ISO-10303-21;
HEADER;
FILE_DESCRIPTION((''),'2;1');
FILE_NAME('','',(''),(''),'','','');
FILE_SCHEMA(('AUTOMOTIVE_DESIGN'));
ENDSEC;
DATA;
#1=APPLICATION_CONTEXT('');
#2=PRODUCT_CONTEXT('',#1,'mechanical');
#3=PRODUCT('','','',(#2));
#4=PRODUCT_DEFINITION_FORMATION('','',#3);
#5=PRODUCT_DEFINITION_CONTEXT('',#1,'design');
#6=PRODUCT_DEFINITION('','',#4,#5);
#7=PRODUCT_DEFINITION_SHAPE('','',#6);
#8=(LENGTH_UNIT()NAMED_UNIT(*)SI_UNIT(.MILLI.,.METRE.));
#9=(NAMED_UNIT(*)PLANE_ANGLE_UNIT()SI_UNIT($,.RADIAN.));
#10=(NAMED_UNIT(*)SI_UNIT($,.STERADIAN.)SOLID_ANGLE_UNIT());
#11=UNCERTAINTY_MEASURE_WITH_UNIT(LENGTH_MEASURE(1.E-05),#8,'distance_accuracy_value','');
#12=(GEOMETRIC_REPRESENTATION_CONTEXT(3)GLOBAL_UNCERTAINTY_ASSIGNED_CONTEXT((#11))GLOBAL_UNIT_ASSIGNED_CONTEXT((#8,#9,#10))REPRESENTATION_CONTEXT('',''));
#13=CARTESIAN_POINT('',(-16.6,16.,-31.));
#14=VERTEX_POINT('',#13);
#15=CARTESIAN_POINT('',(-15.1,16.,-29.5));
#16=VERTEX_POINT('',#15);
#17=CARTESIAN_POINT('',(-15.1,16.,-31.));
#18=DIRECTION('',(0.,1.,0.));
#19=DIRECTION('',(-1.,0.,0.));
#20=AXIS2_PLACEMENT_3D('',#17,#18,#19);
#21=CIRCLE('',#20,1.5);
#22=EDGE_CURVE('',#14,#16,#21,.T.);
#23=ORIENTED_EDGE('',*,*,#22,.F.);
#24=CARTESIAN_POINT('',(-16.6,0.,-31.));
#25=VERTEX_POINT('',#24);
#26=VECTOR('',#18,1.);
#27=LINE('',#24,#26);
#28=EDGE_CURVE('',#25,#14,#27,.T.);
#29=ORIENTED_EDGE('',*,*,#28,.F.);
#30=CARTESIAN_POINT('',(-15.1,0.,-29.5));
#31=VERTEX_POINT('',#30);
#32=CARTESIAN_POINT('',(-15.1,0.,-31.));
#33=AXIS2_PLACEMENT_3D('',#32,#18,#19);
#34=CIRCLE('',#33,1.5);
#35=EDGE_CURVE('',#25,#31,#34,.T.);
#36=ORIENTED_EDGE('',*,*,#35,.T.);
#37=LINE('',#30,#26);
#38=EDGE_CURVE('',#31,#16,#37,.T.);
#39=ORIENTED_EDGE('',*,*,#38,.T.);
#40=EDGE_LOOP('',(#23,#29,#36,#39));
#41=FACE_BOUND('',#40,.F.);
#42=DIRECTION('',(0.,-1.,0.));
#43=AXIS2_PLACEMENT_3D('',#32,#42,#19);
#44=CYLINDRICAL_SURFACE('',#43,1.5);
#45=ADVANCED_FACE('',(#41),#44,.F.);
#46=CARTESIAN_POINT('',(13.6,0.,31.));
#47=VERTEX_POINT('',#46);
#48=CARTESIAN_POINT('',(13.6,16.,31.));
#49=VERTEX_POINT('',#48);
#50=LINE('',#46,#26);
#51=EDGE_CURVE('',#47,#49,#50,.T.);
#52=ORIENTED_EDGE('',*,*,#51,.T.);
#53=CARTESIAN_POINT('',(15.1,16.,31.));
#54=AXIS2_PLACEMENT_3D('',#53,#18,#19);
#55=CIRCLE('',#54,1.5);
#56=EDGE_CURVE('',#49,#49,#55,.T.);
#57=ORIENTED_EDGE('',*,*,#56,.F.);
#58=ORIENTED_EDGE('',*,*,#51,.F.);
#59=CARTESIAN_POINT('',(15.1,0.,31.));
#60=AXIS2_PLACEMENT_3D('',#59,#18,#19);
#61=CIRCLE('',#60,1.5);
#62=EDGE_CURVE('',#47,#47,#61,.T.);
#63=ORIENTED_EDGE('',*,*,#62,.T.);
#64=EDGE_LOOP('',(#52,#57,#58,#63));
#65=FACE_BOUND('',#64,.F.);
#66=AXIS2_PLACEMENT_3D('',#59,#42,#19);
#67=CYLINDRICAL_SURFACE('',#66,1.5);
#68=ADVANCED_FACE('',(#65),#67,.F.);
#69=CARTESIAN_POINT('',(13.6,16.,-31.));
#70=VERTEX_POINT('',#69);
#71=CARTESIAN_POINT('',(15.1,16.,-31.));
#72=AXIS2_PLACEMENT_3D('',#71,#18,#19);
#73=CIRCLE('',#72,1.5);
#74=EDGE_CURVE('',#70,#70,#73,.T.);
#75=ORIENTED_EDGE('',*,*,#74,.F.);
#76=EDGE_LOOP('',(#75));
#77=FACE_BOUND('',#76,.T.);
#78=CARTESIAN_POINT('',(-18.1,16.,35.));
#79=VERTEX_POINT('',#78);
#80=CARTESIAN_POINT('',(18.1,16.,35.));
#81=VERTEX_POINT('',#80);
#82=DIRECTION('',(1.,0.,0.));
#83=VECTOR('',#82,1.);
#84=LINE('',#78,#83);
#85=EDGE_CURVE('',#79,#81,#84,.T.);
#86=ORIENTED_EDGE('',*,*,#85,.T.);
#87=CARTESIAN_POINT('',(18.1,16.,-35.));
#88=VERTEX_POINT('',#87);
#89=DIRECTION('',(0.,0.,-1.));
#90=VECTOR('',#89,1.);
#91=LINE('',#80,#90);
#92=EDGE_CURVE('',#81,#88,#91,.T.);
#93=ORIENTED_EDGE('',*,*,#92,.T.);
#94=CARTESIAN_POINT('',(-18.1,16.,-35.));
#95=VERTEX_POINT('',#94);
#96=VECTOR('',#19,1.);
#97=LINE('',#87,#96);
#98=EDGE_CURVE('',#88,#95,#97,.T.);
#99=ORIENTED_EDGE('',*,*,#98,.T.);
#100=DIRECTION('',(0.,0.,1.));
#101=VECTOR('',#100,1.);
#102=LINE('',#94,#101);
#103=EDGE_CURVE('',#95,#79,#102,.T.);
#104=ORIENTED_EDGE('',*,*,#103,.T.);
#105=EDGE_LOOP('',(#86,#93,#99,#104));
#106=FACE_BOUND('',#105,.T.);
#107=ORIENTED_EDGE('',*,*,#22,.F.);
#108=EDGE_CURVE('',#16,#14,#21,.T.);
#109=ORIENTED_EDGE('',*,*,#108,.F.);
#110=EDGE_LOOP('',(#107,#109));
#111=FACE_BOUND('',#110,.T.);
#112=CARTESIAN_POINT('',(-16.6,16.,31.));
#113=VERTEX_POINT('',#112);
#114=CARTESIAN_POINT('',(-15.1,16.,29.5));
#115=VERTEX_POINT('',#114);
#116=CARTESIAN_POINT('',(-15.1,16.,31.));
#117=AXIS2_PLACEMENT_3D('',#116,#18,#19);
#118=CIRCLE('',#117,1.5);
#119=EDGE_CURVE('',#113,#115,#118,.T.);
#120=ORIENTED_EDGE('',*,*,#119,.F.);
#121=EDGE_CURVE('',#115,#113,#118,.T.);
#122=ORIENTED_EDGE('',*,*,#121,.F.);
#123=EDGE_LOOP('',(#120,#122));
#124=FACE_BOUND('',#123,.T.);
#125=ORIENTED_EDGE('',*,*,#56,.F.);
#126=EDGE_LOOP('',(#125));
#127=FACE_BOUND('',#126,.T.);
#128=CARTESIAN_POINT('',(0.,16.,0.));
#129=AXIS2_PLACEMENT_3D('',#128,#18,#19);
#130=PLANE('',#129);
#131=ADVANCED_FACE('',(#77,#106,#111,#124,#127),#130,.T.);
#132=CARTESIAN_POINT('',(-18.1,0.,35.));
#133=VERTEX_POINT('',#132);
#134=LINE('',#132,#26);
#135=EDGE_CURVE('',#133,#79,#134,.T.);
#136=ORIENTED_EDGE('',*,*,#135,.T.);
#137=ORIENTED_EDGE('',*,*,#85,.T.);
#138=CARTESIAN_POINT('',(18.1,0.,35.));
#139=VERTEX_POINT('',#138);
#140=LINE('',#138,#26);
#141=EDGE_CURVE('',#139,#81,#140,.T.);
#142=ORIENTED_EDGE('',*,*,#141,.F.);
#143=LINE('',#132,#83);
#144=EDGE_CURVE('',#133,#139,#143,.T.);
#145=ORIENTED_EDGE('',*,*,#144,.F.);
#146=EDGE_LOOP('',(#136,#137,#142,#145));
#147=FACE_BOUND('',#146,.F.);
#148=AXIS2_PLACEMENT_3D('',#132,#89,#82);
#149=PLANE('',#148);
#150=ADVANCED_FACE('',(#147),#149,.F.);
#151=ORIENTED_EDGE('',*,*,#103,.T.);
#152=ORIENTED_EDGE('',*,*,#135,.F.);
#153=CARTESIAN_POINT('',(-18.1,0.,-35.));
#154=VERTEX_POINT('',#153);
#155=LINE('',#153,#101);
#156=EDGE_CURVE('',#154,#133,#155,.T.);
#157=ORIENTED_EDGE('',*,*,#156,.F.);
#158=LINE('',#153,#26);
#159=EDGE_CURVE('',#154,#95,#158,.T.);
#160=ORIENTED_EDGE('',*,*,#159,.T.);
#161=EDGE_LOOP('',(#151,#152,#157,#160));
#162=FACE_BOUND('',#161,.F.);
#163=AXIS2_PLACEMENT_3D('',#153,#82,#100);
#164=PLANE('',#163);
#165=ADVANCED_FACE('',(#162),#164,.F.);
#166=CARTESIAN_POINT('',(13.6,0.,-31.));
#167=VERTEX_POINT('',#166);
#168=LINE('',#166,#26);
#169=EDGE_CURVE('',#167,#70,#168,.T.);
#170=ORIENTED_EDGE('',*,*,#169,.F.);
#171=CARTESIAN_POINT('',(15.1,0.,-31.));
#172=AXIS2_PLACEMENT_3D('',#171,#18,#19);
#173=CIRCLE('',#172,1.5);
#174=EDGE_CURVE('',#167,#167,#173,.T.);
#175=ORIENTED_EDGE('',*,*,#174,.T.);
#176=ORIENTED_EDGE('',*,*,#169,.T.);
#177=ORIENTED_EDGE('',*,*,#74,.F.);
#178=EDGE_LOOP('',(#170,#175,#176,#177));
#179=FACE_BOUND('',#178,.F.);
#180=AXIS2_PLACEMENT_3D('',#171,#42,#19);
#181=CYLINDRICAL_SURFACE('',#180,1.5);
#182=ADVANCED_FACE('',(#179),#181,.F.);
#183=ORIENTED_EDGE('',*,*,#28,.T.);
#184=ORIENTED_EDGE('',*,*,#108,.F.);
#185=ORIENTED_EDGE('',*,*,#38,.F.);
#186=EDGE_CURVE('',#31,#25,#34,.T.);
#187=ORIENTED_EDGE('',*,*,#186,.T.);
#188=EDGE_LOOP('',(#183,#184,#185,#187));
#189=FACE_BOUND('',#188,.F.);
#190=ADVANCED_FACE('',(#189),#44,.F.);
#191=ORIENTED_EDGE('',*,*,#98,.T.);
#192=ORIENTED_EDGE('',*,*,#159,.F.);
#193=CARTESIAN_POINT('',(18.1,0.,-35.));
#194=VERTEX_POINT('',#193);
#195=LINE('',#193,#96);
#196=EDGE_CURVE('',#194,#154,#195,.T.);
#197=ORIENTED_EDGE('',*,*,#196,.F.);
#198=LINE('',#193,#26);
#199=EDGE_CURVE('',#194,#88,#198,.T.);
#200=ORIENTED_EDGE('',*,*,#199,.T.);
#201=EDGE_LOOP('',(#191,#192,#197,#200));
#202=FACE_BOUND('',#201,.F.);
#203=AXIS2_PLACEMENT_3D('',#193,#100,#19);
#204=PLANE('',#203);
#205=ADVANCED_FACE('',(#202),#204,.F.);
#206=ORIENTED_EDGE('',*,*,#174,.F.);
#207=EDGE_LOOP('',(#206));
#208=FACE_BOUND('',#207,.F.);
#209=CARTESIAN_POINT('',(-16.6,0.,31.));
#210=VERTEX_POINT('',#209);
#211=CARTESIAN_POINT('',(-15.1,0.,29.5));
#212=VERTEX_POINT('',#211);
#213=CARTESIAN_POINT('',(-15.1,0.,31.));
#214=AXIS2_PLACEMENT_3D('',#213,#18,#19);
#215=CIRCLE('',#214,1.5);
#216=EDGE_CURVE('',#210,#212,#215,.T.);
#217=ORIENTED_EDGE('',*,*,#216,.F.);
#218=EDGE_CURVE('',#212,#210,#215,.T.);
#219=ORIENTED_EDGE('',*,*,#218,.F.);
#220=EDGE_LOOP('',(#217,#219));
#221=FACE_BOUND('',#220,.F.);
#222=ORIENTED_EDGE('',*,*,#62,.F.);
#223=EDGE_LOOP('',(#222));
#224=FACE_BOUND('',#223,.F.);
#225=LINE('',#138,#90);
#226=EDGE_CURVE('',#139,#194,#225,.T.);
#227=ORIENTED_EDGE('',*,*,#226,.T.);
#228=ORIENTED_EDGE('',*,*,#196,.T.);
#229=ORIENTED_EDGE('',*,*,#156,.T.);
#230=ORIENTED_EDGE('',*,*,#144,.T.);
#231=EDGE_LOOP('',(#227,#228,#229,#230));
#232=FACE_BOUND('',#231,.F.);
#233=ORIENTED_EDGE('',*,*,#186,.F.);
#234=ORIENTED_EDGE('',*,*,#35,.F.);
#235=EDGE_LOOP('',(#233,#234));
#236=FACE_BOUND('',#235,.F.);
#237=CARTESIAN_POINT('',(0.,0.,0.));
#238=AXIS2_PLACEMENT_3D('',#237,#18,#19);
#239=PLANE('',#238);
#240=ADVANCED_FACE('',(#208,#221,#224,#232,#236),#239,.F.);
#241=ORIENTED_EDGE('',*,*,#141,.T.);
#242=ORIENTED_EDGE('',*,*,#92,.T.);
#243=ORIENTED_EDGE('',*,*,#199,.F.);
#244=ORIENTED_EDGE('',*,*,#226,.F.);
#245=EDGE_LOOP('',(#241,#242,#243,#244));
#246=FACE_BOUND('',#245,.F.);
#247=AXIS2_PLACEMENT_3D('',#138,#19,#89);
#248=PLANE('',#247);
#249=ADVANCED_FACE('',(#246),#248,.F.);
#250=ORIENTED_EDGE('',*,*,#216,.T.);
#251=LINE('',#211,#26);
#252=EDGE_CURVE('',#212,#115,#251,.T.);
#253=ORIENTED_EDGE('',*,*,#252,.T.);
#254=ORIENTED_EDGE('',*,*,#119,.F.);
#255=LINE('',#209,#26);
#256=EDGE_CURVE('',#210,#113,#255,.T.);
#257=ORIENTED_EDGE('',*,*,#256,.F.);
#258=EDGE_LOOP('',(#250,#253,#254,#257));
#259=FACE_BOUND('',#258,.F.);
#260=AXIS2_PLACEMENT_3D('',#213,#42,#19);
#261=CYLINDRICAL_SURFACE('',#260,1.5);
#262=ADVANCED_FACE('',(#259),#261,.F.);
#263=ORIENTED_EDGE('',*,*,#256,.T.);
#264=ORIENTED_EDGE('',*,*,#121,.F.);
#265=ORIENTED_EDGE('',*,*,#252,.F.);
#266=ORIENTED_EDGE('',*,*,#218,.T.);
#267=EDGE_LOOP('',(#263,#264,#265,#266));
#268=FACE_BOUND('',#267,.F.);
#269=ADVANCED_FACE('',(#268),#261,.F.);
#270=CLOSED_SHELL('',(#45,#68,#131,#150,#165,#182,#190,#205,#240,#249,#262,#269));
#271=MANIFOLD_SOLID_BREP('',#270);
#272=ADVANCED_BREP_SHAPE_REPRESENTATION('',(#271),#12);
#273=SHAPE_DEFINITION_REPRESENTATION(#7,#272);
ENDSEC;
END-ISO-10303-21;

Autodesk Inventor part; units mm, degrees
ref_plane "YZ Plane" through (0, 0, 0) normal (1, 0, 0) x (0, 1, 0)
ref_plane "XZ Plane" through (0, 0, 0) normal (0, 1, 0) x (-1, 0, 0)
ref_plane "XY Plane" through (0, 0, 0) normal (0, 0, 1) x (1, 0, 0)
sketch "Эскиз1" plane through (0, 0, 0) normal (0, 1, 0) x (-1, 0, 0)
  line L0 (18.1, 35) -> (-18.1, 35)
  line L1 (-18.1, 35) -> (-18.1, -35)
  line L2 (-18.1, -35) -> (18.1, -35)
  line L3 (18.1, -35) -> (18.1, 35)
  line L4 (18.1, 35) -> (-18.1, -35) construction
  line L5 (15.1, 31) -> (15.1, -31)
  line L6 (0, 0) -> (5, 0) construction
  circle A0 centre (15.1, 31) radius 1.5
  line L7 (0, 0) -> (0, 5) construction
  line L8 (0, 0) -> (3, -3) construction
  circle A1 centre (-15.1, 31) radius 1.5
  circle A2 centre (15.1, -31) radius 1.5
  circle A3 centre (-15.1, -31) radius 1.5
  point P0 (15.1, 0)
  point P1 (-15.5, 0)
  dimension "d0" = 36.2
  dimension "d1" = 70
  dimension "d2" = 4
  dimension "d3" = 3
  dimension "d4" = 3
extrude "Выдавливание1" add sketch "Эскиз1" along normal blind 16
properties part number "boost"
